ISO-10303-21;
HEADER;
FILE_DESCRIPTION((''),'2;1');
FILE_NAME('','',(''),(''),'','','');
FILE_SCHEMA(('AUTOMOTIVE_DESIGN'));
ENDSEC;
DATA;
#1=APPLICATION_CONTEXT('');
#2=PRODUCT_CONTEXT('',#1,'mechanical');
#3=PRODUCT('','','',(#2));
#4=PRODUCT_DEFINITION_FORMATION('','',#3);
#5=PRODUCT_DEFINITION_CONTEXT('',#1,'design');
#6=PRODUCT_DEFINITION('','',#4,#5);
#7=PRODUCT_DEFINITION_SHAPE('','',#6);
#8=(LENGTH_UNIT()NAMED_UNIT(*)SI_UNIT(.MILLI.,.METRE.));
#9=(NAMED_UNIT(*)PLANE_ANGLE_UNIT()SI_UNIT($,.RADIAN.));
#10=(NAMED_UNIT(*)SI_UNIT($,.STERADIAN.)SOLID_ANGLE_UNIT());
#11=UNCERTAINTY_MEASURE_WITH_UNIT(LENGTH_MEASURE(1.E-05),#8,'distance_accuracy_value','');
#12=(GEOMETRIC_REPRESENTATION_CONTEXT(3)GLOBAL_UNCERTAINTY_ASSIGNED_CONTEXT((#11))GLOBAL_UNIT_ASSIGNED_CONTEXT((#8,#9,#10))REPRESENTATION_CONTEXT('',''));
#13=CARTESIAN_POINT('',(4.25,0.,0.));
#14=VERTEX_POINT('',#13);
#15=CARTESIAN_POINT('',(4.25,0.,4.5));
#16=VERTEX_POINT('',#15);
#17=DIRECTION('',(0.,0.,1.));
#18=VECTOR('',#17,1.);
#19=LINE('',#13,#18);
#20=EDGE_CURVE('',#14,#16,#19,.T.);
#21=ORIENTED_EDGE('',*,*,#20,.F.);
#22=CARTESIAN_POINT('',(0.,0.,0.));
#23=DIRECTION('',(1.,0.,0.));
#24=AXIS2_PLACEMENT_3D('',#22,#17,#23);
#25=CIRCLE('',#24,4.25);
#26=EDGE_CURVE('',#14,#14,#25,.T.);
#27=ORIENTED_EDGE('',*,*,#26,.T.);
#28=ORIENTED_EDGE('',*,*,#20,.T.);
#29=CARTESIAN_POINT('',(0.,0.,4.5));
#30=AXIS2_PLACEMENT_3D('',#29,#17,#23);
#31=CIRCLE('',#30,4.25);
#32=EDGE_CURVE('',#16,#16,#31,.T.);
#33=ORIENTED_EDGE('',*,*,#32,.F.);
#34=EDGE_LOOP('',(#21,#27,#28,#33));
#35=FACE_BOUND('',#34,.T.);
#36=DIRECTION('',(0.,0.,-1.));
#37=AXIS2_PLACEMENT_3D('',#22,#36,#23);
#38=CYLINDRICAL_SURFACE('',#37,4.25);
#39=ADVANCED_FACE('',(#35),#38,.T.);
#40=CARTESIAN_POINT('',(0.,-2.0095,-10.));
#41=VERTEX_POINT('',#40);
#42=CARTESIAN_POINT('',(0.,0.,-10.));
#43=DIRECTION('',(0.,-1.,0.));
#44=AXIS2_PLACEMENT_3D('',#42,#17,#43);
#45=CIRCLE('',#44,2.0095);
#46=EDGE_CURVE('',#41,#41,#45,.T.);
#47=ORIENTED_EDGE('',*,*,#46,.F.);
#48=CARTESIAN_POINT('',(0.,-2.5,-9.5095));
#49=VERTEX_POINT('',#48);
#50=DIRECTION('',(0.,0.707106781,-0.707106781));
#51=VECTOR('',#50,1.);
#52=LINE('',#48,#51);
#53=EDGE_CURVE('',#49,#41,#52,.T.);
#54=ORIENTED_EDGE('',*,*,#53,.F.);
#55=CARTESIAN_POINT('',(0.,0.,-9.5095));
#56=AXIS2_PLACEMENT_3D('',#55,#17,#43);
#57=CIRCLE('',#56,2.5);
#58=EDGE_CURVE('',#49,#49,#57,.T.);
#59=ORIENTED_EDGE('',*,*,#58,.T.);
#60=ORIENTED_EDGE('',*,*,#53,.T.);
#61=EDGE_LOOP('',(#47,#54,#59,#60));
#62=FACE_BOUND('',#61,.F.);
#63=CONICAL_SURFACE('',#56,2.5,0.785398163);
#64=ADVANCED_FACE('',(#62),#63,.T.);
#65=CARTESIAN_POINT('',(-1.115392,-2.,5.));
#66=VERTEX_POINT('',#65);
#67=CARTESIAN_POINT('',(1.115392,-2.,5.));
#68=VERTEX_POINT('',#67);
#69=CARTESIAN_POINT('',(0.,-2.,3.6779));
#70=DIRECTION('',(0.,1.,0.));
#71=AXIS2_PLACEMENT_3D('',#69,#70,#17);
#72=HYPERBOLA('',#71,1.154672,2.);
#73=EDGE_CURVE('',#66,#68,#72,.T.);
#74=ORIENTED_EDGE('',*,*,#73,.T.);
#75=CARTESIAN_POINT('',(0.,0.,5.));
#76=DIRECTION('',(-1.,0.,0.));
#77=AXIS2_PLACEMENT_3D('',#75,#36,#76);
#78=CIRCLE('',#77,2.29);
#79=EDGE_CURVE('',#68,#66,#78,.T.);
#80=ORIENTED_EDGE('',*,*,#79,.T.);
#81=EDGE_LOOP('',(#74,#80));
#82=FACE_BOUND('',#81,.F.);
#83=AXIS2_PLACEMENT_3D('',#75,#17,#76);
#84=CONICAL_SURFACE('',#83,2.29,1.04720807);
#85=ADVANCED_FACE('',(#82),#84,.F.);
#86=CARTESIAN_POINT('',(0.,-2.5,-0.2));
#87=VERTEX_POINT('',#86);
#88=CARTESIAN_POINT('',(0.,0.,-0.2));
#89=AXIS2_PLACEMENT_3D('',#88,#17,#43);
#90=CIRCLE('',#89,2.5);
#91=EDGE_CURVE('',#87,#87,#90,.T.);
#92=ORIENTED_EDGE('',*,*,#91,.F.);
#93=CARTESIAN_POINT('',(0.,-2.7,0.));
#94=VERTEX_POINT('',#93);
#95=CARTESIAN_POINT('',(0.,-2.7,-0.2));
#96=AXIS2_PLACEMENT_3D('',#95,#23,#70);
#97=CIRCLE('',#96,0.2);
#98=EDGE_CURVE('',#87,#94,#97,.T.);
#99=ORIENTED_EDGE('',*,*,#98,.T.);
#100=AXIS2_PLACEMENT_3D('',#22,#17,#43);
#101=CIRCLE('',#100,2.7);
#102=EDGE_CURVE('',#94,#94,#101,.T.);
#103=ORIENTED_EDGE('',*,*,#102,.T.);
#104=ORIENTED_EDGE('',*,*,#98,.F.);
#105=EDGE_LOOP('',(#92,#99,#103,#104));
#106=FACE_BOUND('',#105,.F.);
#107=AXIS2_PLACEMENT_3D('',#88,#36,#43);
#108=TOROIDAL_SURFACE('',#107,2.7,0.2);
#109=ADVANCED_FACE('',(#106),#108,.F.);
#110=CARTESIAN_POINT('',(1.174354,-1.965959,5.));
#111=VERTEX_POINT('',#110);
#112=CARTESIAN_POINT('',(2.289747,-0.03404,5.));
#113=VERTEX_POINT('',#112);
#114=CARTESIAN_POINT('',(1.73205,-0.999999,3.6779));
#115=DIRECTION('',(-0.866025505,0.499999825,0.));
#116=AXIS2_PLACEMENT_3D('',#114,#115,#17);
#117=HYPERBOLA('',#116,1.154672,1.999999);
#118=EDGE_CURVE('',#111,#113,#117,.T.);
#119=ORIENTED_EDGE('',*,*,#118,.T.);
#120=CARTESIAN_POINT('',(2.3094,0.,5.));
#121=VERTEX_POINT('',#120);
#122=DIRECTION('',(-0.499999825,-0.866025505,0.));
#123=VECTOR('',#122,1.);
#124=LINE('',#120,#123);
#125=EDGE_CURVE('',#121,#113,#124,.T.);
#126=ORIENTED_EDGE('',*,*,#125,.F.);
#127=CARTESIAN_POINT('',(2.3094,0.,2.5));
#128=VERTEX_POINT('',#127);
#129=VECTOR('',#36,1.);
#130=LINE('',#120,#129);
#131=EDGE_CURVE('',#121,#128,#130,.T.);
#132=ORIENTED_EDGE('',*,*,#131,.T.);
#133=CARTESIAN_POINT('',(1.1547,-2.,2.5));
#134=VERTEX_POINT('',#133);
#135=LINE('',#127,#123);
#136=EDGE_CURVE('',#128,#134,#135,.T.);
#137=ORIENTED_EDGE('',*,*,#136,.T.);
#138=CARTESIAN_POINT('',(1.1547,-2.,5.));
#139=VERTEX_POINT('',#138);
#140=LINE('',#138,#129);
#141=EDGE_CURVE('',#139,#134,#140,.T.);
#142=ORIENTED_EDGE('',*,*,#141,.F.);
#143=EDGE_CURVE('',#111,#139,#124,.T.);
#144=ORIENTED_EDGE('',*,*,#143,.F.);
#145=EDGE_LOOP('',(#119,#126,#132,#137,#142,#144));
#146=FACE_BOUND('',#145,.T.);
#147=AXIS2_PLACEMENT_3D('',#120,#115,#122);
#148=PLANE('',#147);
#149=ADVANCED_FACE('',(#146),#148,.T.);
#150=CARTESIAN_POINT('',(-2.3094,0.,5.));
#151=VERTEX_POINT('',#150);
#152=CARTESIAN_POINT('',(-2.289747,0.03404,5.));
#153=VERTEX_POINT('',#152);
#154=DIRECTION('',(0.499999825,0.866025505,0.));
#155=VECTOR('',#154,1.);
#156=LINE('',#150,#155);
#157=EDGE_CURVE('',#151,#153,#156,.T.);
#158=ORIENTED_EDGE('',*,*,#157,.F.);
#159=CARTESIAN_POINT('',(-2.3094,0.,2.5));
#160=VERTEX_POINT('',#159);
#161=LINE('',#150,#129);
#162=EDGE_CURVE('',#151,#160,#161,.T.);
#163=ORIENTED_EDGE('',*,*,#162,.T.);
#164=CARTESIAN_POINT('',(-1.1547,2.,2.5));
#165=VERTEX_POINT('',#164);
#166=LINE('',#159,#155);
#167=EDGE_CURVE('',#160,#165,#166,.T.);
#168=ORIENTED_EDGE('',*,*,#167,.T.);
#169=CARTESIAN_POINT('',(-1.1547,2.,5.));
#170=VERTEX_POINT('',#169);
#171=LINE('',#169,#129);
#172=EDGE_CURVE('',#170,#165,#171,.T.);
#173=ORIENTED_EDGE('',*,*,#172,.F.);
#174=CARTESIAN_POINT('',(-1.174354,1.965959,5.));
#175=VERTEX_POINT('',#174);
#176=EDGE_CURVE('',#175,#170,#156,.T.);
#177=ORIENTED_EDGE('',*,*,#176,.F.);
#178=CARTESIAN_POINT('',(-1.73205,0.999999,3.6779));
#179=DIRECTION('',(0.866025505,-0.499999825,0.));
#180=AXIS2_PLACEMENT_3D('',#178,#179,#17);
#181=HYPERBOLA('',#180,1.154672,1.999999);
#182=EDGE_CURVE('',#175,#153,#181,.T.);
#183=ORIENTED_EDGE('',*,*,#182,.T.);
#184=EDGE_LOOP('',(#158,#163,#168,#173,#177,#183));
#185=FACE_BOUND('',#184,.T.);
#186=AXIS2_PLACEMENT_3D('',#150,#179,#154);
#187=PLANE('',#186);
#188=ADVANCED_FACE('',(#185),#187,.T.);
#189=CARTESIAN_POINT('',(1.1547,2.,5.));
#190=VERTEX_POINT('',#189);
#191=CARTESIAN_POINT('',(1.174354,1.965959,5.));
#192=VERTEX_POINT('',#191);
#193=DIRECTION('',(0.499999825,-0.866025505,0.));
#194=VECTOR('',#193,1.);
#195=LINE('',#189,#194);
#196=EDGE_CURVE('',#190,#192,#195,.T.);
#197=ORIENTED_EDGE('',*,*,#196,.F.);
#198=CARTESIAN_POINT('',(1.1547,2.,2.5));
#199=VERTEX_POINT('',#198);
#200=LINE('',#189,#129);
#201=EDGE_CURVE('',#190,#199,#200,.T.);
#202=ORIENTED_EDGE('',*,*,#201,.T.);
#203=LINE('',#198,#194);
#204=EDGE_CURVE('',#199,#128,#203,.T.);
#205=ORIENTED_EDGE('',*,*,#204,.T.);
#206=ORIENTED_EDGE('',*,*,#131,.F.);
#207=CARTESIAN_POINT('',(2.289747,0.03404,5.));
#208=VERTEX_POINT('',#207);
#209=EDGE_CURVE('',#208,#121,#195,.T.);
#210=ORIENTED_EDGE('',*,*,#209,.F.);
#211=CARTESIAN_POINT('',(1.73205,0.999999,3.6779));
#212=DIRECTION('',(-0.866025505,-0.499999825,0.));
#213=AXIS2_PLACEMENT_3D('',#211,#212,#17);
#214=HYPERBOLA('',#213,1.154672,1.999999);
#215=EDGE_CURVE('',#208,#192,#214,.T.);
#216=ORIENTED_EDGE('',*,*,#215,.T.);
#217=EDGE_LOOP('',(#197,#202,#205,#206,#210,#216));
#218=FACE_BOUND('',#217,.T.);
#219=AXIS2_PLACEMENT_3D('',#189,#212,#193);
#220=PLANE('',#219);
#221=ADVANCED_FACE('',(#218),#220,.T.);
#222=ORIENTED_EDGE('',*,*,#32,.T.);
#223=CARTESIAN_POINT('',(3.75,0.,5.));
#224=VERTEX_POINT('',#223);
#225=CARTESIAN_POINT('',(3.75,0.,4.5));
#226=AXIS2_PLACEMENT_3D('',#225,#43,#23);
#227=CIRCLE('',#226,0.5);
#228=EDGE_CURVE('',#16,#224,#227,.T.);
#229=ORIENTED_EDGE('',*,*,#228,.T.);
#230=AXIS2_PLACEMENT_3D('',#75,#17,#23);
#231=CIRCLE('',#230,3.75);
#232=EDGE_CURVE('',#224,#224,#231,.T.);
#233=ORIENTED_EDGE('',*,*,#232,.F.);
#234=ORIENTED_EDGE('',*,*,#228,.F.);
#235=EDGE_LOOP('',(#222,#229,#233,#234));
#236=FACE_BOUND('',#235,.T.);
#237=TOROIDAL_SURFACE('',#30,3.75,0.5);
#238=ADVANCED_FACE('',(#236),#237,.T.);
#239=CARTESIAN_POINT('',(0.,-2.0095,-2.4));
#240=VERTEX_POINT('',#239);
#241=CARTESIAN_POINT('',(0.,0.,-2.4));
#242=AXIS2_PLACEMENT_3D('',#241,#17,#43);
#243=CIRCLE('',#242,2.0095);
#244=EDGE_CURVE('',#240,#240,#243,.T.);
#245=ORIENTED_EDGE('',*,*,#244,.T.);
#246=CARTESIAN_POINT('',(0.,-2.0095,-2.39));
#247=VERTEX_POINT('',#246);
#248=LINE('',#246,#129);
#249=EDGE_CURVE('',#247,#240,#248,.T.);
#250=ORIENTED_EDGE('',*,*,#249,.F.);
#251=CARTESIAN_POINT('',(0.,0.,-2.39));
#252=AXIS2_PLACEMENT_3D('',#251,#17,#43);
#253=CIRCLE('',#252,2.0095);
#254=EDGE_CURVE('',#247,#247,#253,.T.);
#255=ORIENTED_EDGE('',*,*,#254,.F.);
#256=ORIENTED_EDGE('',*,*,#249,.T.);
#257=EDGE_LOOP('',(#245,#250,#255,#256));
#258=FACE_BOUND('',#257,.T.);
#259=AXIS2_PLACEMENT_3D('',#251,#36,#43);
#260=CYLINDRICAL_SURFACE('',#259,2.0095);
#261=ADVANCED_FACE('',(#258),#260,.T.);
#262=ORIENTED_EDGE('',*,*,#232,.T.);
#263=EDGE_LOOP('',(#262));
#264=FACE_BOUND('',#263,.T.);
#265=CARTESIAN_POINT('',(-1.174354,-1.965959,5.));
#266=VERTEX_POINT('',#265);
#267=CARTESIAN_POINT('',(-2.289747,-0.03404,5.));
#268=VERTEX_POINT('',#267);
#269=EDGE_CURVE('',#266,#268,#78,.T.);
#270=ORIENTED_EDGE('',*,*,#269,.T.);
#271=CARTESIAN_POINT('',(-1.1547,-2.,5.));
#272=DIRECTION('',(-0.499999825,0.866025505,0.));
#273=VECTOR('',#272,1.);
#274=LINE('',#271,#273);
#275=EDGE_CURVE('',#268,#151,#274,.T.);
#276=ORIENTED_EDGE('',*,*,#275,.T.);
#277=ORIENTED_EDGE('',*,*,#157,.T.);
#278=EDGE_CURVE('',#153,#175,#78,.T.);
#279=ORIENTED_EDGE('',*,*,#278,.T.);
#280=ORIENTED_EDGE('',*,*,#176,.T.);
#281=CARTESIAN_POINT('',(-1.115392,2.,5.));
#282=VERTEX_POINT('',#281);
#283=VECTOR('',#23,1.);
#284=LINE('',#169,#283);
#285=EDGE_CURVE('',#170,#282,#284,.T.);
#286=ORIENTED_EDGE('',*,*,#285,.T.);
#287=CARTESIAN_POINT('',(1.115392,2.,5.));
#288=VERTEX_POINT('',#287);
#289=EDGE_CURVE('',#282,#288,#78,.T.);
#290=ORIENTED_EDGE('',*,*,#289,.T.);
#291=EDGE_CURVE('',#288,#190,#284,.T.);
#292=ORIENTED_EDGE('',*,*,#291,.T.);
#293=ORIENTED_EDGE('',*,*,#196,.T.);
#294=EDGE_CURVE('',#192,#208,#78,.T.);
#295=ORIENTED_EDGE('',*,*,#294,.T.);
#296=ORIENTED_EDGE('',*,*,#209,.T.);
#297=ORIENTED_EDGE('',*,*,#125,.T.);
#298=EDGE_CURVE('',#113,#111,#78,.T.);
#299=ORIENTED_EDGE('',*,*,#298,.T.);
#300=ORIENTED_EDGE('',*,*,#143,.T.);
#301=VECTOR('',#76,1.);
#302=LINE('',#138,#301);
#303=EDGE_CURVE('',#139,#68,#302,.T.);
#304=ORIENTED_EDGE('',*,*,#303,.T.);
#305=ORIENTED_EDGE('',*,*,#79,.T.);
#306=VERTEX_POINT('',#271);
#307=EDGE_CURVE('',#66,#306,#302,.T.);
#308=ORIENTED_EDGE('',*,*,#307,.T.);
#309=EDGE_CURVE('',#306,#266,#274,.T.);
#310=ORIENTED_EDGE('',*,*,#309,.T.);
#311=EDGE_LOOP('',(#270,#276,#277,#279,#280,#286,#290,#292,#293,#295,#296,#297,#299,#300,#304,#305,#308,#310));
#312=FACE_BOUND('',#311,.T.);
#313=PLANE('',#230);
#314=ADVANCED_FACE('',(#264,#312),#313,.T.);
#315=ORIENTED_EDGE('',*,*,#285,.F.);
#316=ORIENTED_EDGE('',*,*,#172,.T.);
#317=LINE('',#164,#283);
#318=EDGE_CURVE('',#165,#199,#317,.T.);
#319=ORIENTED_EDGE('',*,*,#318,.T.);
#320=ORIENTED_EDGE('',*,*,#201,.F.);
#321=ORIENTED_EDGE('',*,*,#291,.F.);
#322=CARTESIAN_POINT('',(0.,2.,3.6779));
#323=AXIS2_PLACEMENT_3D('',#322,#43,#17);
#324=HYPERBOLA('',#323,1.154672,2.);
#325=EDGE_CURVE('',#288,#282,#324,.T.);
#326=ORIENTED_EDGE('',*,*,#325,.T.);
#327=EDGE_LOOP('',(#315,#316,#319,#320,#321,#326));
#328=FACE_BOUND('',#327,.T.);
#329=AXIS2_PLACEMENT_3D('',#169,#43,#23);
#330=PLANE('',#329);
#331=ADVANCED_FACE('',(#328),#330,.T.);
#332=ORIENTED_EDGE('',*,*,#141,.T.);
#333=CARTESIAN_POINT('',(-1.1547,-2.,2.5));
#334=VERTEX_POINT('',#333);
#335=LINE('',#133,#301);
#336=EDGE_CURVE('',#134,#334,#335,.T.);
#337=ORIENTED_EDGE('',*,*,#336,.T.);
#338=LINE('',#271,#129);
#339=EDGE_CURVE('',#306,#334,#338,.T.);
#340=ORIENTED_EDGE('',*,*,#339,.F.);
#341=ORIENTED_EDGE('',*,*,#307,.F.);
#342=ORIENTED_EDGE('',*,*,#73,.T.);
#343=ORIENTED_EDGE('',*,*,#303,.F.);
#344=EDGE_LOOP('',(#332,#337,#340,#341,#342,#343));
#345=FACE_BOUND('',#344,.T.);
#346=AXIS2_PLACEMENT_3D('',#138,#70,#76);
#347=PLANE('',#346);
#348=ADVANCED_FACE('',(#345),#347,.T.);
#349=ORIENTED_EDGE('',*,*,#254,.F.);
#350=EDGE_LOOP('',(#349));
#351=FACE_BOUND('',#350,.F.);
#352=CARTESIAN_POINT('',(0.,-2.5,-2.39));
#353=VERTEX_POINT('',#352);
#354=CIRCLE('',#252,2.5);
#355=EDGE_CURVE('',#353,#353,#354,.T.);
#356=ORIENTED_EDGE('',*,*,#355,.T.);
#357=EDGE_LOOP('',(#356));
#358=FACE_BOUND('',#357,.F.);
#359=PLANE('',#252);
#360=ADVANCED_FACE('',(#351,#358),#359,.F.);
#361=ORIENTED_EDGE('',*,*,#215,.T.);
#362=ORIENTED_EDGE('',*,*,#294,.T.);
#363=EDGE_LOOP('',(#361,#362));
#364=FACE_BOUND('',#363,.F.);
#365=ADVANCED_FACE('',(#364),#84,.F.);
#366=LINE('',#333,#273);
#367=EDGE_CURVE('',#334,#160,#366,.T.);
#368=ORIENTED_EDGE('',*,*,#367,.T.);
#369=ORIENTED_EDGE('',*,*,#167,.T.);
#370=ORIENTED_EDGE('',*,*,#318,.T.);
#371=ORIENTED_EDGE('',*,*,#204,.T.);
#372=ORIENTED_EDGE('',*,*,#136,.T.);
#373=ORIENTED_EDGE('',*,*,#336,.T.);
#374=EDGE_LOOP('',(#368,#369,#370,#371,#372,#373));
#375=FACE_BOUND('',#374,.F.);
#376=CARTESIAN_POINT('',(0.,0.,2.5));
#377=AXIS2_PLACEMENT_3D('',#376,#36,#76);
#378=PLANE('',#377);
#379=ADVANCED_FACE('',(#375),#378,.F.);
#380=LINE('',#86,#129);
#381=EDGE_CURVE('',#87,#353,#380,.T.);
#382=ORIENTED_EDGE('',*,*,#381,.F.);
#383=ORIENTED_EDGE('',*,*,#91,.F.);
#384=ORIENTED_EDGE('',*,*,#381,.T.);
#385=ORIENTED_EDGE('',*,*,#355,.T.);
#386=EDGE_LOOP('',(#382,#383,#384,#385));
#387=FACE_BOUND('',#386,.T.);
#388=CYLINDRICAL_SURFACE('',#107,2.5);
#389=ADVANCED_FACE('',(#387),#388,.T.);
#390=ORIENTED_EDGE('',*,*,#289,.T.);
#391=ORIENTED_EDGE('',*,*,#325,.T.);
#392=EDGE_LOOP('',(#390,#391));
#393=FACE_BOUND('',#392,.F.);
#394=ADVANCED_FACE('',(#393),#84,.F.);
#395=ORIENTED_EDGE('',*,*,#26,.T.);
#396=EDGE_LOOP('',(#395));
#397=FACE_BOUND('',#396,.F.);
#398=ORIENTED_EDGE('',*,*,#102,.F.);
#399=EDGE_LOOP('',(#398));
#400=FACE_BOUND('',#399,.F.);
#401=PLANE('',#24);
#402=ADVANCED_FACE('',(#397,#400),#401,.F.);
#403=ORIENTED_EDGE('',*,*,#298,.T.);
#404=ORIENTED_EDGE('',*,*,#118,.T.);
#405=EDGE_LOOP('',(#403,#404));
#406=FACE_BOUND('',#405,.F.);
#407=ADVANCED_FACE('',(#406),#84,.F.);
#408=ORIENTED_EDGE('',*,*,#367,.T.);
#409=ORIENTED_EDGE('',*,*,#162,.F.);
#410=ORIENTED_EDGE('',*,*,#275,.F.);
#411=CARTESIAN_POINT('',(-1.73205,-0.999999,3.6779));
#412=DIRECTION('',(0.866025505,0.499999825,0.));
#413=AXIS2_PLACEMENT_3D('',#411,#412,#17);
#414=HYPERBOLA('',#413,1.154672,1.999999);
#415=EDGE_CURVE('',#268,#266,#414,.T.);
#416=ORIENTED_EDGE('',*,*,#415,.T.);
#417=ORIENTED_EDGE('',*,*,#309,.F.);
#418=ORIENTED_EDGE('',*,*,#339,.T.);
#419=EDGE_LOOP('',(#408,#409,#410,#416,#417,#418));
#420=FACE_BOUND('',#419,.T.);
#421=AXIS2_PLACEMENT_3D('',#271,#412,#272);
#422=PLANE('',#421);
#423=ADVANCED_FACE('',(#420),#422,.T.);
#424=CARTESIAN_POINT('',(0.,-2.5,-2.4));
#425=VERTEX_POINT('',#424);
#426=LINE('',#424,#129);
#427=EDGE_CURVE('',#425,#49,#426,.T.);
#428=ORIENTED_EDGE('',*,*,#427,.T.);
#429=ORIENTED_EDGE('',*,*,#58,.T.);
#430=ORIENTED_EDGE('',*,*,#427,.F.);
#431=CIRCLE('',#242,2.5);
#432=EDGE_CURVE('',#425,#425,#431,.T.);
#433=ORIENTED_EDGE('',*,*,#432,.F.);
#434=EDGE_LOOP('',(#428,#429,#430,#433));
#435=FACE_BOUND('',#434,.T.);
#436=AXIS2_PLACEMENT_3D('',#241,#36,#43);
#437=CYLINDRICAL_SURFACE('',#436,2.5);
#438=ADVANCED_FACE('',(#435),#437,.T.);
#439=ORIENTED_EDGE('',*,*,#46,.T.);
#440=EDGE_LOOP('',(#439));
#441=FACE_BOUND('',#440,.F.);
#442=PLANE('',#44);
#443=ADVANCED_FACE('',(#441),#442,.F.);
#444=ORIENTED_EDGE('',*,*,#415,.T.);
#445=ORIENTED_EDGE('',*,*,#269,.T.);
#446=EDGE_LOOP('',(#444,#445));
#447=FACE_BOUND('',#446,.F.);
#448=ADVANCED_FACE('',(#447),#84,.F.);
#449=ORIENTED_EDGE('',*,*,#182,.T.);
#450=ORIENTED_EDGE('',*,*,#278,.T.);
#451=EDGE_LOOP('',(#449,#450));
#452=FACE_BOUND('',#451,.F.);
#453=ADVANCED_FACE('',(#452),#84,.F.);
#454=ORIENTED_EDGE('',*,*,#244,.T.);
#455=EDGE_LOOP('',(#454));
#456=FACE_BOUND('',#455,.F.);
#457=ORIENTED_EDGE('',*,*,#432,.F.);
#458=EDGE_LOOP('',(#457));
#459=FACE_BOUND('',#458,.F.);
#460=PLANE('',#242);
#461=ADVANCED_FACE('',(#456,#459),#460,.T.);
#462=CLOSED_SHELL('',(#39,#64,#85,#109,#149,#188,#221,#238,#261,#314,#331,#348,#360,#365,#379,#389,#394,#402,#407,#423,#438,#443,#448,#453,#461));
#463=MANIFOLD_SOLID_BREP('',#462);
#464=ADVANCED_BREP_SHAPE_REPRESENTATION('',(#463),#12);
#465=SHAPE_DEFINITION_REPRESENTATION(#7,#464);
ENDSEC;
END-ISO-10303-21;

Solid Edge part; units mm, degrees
sketch "Sketch1" plane through (0, 0, 0) normal (0, 0, 1) x (1, 0, 0)
  circle A0 centre (0, 0) radius 4.25
extrude "Protrusion1" add sketch "Sketch1" along normal blind 5
sketch "Sketch2" plane through (0, 0, 5) normal (0, 0, 1) x (0, 1, 0)
  line L0 (0, 2.3094) -> (2, 1.1547)
  line L1 (2, 1.1547) -> (2, -1.1547)
  line L2 (2, -1.1547) -> (0, -2.3094)
  line L3 (0, -2.3094) -> (-2, -1.1547)
  line L4 (-2, -1.1547) -> (-2, 1.1547)
  line L5 (-2, 1.1547) -> (0, 2.3094)
extrude "Cutout1" cut sketch "Sketch2" against normal blind 2.5
fillet "Round1" radius 0.5 1 edges at (-4.25, 0, 5)
sketch "Sketch3" plane through (0, 0, 0) normal (1, 0, 0) x (0, 1, 0)
  line L0 (-2.0095, -10) -> (0, -10)
  line L1 (-2.5, -9.5095) -> (-2.0095, -10)
  line L2 (-2.5, -2.4) -> (-2.5, -9.5095)
  line L3 (-2.0095, -2.4) -> (-2.5, -2.4)
  line L4 (-2.0095, -2.39) -> (-2.0095, -2.4)
  line L5 (-2.5, -2.39) -> (-2.0095, -2.39)
  line L6 (-2.5, -0.2) -> (-2.5, -2.39)
  arc A0 (-2.5, -0.2) -> (-2.7, 0) centre (-2.7, -0.2) ccw
  dimension "D1" = 2.4
  dimension "D2" = 0.01
  dimension "D3" = 0.2
  dimension "D4" = 10
revolve "RevolvedProtrusion1" add sketch "Sketch3" angle 360 about axis through (0, 0, -60.325) along (0, 0, 1) material side at (0, -1.0048, -9.95)
cosmetic_thread "Thread1" size "M5"
sketch "Sketch4" plane through (0, 0, 0) normal (0, -1, 0) x (1, 0, 0)
  line L0 (-2.29, 5) -> (0, 3.6779)
revolve "RevolvedCutout1" cut sketch "Sketch4" angle 360 about axis through (0, 0, 57.15) along (0, 0, -1) material side at (-1.12, 0, 4.3823)
properties material "Stahl"
